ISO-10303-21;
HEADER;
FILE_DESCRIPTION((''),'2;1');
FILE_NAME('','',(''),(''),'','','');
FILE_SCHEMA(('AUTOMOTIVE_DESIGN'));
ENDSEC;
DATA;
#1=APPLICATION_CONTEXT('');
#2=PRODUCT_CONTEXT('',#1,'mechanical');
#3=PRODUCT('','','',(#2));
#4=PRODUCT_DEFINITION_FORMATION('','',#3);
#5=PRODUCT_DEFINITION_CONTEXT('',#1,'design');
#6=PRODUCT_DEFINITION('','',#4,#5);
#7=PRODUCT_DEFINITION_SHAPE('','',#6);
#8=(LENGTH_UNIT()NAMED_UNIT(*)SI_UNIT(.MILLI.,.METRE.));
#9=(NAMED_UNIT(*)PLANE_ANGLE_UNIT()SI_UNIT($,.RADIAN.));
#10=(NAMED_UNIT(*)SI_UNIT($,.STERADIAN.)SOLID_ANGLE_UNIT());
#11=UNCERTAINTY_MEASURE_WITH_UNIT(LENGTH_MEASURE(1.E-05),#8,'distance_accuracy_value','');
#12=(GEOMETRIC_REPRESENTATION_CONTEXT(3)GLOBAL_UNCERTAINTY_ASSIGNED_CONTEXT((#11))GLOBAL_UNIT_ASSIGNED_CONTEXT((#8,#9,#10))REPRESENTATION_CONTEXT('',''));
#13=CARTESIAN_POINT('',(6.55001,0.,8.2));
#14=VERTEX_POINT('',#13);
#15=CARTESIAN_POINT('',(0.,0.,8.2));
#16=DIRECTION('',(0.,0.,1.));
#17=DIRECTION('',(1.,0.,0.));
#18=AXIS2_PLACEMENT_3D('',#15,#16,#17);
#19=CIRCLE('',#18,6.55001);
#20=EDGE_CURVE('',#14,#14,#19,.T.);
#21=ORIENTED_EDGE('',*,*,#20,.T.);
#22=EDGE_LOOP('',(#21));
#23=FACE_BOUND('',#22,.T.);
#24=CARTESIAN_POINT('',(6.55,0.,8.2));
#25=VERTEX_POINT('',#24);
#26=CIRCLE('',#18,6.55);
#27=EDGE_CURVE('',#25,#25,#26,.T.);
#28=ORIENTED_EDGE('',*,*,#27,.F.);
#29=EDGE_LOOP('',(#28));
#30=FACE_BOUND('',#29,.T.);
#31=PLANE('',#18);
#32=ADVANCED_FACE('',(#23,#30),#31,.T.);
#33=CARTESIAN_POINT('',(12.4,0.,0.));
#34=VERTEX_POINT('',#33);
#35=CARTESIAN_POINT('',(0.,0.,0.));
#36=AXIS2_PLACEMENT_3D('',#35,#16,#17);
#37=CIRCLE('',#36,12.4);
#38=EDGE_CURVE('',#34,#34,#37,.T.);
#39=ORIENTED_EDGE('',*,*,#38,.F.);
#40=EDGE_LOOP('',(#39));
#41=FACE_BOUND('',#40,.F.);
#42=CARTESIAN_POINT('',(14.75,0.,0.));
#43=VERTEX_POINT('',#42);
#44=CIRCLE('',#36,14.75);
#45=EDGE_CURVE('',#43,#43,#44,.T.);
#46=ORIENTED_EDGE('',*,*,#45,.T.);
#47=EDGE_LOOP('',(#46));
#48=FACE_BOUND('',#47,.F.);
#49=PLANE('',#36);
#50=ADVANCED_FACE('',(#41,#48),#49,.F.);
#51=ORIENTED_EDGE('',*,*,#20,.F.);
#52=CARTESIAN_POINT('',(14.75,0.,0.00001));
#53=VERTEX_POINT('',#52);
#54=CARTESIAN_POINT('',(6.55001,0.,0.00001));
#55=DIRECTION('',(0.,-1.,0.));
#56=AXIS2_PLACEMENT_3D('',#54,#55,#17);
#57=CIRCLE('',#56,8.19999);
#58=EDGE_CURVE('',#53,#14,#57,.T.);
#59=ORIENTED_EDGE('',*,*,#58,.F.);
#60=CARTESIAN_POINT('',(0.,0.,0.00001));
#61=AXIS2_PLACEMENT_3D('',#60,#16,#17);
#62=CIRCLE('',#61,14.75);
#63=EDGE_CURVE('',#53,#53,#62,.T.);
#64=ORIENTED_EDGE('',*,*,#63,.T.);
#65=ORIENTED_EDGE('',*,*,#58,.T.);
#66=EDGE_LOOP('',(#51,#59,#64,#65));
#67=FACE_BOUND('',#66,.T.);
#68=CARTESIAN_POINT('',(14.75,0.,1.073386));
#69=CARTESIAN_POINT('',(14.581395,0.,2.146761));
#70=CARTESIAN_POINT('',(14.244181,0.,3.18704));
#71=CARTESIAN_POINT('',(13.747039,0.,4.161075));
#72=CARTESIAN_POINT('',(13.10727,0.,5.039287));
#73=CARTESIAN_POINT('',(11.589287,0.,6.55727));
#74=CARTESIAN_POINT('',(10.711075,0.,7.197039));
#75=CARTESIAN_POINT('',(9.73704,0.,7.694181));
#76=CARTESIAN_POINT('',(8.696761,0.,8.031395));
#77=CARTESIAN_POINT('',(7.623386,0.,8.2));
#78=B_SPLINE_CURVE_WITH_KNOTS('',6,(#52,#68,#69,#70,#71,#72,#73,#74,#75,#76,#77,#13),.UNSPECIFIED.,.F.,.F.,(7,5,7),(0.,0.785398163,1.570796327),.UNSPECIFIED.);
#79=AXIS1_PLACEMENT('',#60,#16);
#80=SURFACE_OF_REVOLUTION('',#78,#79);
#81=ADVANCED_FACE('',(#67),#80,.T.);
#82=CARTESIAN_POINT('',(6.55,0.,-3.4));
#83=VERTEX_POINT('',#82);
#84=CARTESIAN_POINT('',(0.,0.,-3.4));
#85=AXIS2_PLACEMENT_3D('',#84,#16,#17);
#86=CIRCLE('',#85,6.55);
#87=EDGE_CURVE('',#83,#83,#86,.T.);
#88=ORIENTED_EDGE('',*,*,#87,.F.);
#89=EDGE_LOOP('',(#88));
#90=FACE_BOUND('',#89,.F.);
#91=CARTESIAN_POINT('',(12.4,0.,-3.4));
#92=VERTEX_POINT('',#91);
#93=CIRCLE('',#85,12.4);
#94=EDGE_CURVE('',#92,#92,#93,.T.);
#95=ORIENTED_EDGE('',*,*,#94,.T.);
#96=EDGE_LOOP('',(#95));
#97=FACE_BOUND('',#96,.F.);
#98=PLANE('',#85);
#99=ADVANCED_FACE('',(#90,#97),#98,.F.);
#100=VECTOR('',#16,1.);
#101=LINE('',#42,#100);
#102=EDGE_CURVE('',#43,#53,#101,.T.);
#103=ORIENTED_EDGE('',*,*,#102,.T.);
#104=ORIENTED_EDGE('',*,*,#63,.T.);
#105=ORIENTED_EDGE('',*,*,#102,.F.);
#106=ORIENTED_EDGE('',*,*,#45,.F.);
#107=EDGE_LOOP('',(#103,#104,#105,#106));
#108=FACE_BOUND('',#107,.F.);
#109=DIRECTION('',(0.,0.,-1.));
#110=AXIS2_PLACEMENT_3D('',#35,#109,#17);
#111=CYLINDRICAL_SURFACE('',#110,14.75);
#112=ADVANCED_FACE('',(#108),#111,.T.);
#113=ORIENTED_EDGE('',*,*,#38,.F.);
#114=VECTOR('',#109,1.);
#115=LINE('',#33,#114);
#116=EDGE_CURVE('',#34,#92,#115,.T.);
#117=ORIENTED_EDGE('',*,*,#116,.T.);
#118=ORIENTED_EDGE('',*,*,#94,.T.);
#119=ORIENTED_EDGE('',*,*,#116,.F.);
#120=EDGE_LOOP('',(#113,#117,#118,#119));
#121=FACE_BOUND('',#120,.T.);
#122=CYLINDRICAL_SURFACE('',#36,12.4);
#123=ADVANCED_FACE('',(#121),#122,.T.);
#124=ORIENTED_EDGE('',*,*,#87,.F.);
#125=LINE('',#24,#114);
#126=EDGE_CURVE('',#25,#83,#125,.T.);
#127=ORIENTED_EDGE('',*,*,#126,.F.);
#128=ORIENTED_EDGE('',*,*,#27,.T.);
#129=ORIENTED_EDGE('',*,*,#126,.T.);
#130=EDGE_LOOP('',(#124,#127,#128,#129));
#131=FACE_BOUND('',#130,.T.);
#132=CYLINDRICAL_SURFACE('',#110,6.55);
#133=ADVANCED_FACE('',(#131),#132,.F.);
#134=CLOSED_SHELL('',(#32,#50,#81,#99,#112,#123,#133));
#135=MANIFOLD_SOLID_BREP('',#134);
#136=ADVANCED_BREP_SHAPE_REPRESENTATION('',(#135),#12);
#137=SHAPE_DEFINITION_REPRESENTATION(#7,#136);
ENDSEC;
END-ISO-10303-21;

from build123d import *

# Parameters (mm, degrees)
F0_R        = 12.4
F0_R_2      = 6.55
F1_DEPTH    = 3.4
F0_R_3      = 14.75
F1_FACE_R   = 12.4
F1_FACE_R_2 = 6.55
F2_DEPTH    = 8.2
F3_R        = 8.19999


# Not quite as in the source:
# - a fillet or chamfer is up to 0.001 mm smaller than in the source, because OpenCascade refuses the exact size


with BuildPart() as f1:
    # F0 (on Top) → F1 (new body)
    with BuildSketch(Plane.XY):
        Circle(F0_R)
        Circle(F0_R_2, mode=Mode.SUBTRACT)
    extrude(amount=-F1_DEPTH)

    # F0 (on Top) + F1_face (on face) → F2 (join)
    with BuildSketch(Plane.XY):
        Circle(F0_R_3)
        Circle(F0_R, mode=Mode.SUBTRACT)
    with BuildSketch(Plane.XY):
        Circle(F1_FACE_R)
        Circle(F1_FACE_R_2, mode=Mode.SUBTRACT)
    extrude(amount=F2_DEPTH)

    # F3 (radius 8.2 in the source; OpenCascade refuses exactly that, so slightly less here)
    f3_edges = [f1.edges().sort_by_distance(p)[0] for p in [
        (-14.75, 0, 8.2),
    ]]
    fillet(f3_edges, radius=F3_R)


solid = f1.part
